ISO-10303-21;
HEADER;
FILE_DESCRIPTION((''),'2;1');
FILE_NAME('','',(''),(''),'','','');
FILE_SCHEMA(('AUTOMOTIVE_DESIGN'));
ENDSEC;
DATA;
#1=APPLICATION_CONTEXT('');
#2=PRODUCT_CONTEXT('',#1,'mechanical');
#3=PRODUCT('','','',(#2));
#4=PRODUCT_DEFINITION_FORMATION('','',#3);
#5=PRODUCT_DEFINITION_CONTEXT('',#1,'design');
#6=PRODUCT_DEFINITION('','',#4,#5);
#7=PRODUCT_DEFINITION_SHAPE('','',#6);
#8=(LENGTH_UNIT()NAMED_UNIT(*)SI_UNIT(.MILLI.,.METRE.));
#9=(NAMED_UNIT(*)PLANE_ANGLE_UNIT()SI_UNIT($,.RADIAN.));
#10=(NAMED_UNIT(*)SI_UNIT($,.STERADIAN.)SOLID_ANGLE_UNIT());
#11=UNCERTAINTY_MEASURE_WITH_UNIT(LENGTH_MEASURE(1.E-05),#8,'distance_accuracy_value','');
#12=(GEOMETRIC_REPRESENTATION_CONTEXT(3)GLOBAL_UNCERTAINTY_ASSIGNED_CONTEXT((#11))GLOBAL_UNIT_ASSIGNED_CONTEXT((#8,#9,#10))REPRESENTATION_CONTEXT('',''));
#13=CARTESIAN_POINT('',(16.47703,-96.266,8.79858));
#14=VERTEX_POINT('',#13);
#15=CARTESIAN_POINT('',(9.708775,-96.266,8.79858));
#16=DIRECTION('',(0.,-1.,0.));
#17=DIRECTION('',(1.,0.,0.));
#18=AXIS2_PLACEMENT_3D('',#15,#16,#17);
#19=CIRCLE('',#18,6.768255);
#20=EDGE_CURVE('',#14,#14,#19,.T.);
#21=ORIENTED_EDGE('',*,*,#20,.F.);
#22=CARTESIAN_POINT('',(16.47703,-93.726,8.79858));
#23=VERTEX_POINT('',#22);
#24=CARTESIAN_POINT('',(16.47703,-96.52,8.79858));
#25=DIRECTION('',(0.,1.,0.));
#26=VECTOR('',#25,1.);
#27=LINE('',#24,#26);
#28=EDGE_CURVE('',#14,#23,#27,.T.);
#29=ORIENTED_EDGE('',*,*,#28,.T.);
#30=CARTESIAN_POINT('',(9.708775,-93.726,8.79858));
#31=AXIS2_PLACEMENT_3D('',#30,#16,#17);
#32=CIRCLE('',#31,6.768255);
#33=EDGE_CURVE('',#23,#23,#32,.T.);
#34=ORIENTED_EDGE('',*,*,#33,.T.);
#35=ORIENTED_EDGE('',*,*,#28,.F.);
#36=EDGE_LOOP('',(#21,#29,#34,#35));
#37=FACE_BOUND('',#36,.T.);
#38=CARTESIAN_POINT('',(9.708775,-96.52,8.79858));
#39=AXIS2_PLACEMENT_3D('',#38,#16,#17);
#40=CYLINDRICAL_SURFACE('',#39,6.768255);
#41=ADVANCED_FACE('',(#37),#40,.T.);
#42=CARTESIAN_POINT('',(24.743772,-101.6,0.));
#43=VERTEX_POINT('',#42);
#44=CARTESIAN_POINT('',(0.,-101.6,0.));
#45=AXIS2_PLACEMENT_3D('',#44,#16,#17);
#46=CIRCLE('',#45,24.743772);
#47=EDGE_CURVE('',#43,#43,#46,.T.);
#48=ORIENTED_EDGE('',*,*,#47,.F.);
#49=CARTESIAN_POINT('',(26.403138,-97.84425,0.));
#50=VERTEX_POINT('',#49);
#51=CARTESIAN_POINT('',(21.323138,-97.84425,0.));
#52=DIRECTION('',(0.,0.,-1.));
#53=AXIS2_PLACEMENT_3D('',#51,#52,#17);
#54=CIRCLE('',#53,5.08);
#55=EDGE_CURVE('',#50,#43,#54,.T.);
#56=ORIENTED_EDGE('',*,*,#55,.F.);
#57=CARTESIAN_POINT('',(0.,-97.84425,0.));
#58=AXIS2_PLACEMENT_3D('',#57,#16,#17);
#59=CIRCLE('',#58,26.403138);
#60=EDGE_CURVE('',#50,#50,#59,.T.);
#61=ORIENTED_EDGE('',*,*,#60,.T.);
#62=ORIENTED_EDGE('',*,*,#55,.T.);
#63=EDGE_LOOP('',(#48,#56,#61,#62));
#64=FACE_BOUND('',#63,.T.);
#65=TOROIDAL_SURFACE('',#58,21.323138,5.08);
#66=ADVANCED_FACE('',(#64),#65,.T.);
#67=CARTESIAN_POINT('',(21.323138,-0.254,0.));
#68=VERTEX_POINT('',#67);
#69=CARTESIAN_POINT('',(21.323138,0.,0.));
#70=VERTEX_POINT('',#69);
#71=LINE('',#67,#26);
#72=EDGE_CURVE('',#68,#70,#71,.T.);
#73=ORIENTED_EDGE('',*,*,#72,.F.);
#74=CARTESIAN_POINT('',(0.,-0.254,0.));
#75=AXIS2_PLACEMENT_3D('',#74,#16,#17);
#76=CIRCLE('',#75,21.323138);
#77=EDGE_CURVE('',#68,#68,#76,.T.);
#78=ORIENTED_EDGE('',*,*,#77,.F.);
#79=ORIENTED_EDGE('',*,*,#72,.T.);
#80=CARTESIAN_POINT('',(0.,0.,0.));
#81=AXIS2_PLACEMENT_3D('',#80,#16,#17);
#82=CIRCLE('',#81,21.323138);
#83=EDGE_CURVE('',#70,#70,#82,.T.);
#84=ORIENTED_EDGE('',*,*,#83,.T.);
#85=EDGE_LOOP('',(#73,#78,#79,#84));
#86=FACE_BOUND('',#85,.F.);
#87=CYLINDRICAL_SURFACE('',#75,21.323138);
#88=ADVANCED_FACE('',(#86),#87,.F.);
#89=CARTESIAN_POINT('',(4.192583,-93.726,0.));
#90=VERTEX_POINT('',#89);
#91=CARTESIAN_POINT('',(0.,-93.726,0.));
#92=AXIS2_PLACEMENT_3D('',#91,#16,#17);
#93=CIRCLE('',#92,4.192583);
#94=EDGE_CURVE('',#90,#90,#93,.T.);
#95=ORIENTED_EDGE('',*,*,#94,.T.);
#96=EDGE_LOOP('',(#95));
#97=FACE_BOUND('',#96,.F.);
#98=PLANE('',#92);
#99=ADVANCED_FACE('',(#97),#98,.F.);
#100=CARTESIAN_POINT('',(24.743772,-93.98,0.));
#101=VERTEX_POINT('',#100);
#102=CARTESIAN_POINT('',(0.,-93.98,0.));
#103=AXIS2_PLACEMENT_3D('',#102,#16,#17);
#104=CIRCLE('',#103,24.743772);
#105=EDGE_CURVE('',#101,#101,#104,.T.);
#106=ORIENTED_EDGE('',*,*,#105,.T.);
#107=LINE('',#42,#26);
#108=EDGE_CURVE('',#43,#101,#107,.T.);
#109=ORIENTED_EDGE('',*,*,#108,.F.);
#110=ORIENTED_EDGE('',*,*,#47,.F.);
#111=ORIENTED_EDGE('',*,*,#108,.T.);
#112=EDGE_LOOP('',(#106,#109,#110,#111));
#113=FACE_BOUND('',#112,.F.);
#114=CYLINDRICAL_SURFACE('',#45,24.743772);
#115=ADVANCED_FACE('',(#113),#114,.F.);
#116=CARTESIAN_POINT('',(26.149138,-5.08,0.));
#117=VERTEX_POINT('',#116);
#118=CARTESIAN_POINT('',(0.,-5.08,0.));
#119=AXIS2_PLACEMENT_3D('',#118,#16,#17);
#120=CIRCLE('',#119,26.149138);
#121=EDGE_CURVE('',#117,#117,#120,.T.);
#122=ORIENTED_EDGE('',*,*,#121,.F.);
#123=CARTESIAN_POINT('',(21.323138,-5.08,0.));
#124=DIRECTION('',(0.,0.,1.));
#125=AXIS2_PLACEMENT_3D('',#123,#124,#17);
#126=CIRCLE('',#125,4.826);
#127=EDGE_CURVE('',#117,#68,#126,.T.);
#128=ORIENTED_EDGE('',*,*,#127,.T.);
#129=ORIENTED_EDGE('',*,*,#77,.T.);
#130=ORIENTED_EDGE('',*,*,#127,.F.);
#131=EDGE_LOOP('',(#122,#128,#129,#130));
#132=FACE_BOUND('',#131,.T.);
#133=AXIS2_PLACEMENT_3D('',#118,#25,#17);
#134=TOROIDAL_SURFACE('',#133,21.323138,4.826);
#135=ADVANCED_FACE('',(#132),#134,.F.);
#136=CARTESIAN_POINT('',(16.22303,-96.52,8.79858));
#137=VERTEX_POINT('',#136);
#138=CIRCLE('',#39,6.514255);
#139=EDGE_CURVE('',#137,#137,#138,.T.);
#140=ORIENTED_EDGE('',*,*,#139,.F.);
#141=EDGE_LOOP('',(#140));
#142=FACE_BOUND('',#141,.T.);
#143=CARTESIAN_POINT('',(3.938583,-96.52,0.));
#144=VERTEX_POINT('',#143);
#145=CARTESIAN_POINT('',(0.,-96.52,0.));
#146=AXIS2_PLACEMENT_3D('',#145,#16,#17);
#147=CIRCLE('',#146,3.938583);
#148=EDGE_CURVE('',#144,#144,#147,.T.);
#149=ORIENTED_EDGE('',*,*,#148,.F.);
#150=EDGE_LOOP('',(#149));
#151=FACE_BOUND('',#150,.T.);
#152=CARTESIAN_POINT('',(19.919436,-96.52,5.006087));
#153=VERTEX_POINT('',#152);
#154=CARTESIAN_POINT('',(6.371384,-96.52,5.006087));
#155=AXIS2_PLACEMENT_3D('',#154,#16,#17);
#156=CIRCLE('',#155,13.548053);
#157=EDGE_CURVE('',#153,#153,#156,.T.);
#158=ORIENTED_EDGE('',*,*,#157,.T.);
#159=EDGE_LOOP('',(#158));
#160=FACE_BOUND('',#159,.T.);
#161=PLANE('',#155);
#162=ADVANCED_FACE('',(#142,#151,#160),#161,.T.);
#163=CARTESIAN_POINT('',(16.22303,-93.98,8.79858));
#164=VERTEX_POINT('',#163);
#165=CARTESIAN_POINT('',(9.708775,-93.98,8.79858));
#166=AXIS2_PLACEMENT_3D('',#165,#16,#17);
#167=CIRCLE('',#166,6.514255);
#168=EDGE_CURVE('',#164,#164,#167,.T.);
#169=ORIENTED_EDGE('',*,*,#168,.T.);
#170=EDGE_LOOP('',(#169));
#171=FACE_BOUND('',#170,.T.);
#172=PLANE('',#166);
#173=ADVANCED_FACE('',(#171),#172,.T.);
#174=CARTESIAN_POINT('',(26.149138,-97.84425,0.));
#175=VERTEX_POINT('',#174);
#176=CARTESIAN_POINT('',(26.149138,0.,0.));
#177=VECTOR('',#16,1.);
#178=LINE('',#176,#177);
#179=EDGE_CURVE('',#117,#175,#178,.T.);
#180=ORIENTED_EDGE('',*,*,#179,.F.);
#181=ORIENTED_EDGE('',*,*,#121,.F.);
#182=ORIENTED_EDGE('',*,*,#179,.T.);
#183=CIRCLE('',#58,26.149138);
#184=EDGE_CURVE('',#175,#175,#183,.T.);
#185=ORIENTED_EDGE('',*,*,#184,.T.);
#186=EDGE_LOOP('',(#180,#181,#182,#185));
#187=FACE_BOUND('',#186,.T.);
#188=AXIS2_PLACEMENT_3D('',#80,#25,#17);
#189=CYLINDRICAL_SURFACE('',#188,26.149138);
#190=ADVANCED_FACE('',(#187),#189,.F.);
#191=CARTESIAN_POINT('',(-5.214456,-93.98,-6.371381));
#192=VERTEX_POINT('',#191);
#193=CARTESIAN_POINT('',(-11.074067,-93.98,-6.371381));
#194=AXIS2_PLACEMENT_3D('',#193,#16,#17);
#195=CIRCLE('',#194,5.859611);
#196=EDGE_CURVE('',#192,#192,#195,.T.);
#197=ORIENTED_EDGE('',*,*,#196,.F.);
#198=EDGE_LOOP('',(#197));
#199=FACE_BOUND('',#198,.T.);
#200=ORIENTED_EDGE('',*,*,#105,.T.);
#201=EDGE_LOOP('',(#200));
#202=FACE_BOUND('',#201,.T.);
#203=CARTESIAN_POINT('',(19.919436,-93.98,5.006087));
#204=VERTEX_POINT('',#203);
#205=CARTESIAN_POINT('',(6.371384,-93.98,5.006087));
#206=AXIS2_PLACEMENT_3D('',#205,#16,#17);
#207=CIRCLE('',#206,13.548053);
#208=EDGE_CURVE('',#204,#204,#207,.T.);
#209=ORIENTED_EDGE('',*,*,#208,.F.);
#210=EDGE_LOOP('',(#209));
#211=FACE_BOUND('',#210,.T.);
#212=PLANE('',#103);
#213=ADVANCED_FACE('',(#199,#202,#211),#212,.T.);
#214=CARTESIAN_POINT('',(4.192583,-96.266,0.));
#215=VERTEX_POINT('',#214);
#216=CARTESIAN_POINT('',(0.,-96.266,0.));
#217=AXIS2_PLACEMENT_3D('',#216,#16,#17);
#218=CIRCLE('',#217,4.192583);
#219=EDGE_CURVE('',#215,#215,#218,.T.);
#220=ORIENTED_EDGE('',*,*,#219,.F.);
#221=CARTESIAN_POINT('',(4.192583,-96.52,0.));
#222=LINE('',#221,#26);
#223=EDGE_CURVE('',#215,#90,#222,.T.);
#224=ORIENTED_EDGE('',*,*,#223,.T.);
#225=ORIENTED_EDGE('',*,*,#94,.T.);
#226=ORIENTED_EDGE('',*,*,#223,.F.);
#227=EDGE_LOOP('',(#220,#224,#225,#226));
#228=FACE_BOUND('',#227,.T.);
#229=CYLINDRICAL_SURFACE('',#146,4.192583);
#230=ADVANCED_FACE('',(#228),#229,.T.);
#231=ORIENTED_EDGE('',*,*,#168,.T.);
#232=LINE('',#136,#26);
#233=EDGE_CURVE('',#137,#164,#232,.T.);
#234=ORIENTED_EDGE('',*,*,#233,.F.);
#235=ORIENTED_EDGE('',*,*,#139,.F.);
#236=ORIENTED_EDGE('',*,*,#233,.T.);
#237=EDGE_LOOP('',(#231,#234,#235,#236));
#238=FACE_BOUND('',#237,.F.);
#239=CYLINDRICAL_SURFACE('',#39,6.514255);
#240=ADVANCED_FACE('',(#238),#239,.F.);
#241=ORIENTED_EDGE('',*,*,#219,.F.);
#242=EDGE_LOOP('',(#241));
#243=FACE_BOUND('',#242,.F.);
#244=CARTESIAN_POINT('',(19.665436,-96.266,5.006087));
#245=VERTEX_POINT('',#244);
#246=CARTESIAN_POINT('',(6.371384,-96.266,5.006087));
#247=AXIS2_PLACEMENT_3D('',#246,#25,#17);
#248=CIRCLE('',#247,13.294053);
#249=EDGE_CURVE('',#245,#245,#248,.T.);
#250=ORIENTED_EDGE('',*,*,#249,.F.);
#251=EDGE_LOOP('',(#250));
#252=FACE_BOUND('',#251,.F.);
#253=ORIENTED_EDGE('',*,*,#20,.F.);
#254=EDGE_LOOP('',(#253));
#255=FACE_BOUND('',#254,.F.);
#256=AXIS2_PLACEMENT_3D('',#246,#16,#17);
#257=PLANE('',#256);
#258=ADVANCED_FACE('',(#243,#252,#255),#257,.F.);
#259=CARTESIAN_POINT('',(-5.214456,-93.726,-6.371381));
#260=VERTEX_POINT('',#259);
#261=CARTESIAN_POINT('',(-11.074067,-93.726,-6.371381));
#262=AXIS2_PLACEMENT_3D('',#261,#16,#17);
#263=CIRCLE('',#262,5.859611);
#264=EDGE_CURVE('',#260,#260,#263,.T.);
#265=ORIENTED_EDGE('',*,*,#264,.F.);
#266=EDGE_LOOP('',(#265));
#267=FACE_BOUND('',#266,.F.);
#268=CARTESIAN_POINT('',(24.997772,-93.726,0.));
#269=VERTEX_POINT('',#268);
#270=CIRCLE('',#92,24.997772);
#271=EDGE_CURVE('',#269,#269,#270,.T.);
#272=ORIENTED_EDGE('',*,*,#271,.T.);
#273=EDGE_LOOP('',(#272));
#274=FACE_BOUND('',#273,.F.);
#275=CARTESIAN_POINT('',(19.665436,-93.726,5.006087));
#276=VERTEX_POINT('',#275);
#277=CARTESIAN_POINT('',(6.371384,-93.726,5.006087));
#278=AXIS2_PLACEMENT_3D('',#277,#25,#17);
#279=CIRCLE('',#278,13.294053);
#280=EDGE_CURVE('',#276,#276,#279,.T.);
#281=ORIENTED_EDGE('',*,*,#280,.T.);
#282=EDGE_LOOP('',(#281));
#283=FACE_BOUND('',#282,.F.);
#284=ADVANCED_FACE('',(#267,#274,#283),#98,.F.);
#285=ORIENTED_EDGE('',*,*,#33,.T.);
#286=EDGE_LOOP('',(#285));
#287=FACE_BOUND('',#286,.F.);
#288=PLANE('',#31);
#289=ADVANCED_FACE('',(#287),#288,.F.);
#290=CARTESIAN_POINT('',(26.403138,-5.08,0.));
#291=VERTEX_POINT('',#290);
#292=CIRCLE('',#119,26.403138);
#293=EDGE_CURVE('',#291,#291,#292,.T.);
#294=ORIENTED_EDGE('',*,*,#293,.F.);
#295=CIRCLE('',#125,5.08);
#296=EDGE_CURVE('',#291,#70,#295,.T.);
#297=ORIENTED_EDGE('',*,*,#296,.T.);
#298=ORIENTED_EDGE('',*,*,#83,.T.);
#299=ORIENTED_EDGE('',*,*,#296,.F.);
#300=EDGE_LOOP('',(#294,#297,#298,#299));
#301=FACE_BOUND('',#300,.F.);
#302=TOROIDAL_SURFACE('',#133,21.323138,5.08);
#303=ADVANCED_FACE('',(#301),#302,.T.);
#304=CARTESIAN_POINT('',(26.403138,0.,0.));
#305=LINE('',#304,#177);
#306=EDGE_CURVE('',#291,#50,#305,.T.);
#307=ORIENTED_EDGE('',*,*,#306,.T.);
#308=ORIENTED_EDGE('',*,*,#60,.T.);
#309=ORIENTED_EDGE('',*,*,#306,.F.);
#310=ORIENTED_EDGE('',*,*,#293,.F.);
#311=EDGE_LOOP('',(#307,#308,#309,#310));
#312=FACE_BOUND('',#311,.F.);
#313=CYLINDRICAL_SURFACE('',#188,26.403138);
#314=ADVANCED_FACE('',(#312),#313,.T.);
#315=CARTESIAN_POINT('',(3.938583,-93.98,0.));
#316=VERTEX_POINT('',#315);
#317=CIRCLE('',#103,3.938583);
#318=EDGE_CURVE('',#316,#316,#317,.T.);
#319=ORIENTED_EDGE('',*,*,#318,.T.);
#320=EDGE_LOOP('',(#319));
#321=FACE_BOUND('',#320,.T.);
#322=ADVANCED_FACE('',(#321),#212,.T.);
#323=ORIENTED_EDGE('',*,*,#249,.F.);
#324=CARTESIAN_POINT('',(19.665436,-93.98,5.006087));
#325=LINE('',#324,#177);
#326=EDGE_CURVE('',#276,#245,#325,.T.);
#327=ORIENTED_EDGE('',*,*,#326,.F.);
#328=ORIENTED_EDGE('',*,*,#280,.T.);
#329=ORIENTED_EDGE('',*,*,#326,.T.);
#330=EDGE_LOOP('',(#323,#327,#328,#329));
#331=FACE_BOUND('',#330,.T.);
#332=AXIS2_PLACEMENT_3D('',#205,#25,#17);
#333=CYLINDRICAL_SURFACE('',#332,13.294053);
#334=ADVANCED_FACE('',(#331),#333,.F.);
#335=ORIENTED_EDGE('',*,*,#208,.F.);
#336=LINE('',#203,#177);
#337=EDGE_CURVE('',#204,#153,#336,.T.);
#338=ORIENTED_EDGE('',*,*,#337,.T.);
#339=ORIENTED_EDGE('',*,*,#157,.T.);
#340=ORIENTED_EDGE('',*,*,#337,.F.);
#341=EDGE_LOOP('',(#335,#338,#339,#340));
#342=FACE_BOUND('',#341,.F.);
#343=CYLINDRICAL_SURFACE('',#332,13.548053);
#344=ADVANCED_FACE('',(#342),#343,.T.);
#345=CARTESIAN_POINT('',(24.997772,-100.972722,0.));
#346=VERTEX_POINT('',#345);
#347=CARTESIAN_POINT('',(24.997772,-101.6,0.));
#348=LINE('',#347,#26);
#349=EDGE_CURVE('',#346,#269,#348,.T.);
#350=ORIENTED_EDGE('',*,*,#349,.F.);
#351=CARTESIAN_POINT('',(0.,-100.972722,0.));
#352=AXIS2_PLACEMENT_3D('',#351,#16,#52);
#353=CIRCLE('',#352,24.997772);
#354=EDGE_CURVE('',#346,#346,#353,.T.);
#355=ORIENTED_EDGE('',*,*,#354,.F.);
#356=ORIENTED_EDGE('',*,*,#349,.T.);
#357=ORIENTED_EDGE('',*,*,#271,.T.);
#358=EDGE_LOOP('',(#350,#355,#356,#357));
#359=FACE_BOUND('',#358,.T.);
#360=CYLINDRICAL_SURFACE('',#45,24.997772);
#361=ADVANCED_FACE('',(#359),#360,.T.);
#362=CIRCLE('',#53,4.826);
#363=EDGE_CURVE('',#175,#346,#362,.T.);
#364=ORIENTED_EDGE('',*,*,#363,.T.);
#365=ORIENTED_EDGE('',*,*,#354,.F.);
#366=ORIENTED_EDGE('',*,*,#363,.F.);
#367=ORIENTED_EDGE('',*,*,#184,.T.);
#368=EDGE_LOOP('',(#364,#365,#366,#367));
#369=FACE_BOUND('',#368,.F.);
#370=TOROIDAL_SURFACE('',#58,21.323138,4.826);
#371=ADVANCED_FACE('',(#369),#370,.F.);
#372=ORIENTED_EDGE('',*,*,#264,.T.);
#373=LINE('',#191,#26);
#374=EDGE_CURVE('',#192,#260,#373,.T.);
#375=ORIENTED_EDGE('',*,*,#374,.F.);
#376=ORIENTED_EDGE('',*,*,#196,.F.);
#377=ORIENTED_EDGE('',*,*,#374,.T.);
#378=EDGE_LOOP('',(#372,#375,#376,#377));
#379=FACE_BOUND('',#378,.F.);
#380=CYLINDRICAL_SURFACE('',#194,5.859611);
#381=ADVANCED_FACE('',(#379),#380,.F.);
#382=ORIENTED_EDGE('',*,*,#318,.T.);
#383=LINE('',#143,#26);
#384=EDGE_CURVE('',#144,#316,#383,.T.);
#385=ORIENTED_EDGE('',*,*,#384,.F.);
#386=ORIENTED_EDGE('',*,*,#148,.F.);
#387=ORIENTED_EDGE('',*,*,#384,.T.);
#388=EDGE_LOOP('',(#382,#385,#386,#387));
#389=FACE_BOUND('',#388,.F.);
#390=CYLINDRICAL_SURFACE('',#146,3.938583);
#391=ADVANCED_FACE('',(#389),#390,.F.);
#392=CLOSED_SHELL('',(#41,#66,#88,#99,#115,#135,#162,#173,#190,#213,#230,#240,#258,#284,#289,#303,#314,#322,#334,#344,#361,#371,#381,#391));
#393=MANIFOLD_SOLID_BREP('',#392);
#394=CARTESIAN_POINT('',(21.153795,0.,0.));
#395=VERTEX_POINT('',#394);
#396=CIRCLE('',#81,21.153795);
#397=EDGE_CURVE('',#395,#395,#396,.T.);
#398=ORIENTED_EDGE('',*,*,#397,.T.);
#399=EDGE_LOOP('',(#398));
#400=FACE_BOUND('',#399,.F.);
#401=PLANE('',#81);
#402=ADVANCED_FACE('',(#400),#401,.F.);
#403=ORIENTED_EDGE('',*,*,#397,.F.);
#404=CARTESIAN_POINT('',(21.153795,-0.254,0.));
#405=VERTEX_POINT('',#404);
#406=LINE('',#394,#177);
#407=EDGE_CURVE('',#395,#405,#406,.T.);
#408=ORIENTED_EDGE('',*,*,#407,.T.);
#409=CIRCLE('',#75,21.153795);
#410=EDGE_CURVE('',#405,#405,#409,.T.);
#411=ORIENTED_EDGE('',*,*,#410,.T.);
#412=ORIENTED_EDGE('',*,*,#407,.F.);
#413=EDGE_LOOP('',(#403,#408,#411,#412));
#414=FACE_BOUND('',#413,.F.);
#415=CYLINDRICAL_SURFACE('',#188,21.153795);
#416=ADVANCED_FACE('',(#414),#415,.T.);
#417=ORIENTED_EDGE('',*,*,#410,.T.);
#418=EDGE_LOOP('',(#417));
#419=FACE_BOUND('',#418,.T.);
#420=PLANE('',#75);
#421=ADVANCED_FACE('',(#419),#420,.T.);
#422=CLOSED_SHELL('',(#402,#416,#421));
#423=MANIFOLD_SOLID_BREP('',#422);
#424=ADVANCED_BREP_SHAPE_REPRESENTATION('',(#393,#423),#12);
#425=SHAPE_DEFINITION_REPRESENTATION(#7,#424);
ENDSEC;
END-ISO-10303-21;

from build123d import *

# Parameters (mm, degrees)
F0_R      = 26.403137542
F1_DEPTH  = 101.6
F2_R      = 24.74377178
F3_DEPTH  = 7.62
F5_R      = 13.5480527637
F6_DEPTH  = 2.54
F7_R      = 6.5142551247
F8_DEPTH  = 2.54
F9_R      = 3.938583422
F10_DEPTH = 2.54
F11_T     = -0.254
F12_R     = 21.153794525
F13_DEPTH = 0.254
F14_R     = 5.8596108627
F15_DEPTH = 25.4


# Not quite as in the source:
# - a fillet or chamfer that OpenCascade refuses, or shapes differently, is made with other operations: its cross-section is extruded or revolved along the edge and cut away or added
# - a shell that OpenCascade refuses in one call is made with other operations: the cavity is built on its own and cut out


with BuildPart() as f1:
    # F0 (on Front) → F1 (new body)
    with BuildSketch(Plane.XZ):
        Circle(F0_R)
    extrude(amount=F1_DEPTH)

    # F2 (on face) → F3 (cut)
    with BuildSketch(Plane.XZ.offset(101.6)):
        Circle(F2_R)
    extrude(amount=-F3_DEPTH, mode=Mode.SUBTRACT)

    # F4: fillet of radius 5.08 on 2 edges, made by hand

    # F4_s1 → F4_t2 (revolve, cut)
    with BuildSketch(Plane.XY):
        with BuildLine():
            ThreePointArc((26.403137542, -97.8442495544), (25.9698149533, -99.8972446921), (24.74377178, -101.6))
            Line((24.74377178, -101.6), (24.8121844648, -101.6751150089))
            ThreePointArc((24.8121844648, -101.6751150089), (25.573454661, -101.7016), (26.403137542, -101.7016))
            Line((26.403137542, -101.7016), (26.504737542, -101.6))
            Line((26.504737542, -101.6), (26.504737542, -97.8442495544))
            Line((26.504737542, -97.8442495544), (26.403137542, -97.8442495544))
        make_face()
    revolve(axis=Axis((0, -101.6, 0), (0, -1, 0)), mode=Mode.SUBTRACT)

    # F4_s3 → F4_t4 (revolve, cut)
    with BuildSketch(Plane.XY):
        with BuildLine():
            ThreePointArc((26.403137542, -5.08), (24.9152399905, -1.4878975516), (21.323137542, 0))
            Line((21.323137542, 0), (21.323137542, 0.1016))
            Line((21.323137542, 0.1016), (26.504737542, 0.1016))
            Line((26.504737542, 0.1016), (26.504737542, -5.08))
            Line((26.504737542, -5.08), (26.403137542, -5.08))
        make_face()
    revolve(axis=Axis((0, 0, 0), (0, -1, 0)), mode=Mode.SUBTRACT)

    # F5 (on face) → F6 (join)
    with BuildSketch(Plane.XZ.offset(93.98)):
        with Locations((6.3713835552, 5.0060865469)):
            Circle(F5_R)
    extrude(amount=F6_DEPTH)

    # F7 (on face) → F8 (cut)
    with BuildSketch(Plane.XZ.offset(96.52)):
        with Locations((9.7087752074, 8.7985796854)):
            Circle(F7_R)
    extrude(amount=-F8_DEPTH, mode=Mode.SUBTRACT)

    # F9 (on face) → F10 (cut)
    with BuildSketch(Plane.XZ.offset(96.52)):
        Circle(F9_R)
    extrude(amount=-F10_DEPTH, mode=Mode.SUBTRACT)

    # F11: a shell. OpenCascade refuses it in one call, so the cavity is built on its own and cut out:
    # the body offset inwards by the wall thickness, plus a prism from it out through each open face.
    f11_core = offset(f1.part, amount=F11_T, kind=Kind.INTERSECTION, mode=Mode.PRIVATE)
    f11_exits = [f11_core.faces().sort_by_distance(p)[0] for p in [
        (0, -0.254, 0),
    ]]
    add(f11_core, mode=Mode.SUBTRACT)
    extrude(f11_exits, amount=-F11_T, mode=Mode.SUBTRACT)

    # F14 (on face) → F15 (cut)
    with BuildSketch(Plane.XZ.offset(93.98)):
        with Locations((-11.0740670934, -6.3713807613)):
            Circle(F14_R)
    extrude(amount=-F15_DEPTH, mode=Mode.SUBTRACT)


with BuildPart() as f13:
    # F12 (on Front) → F13 (new body)
    with BuildSketch(Plane.XZ):
        Circle(F12_R)
    extrude(amount=F13_DEPTH)


solid = Compound([f1.part, f13.part])
